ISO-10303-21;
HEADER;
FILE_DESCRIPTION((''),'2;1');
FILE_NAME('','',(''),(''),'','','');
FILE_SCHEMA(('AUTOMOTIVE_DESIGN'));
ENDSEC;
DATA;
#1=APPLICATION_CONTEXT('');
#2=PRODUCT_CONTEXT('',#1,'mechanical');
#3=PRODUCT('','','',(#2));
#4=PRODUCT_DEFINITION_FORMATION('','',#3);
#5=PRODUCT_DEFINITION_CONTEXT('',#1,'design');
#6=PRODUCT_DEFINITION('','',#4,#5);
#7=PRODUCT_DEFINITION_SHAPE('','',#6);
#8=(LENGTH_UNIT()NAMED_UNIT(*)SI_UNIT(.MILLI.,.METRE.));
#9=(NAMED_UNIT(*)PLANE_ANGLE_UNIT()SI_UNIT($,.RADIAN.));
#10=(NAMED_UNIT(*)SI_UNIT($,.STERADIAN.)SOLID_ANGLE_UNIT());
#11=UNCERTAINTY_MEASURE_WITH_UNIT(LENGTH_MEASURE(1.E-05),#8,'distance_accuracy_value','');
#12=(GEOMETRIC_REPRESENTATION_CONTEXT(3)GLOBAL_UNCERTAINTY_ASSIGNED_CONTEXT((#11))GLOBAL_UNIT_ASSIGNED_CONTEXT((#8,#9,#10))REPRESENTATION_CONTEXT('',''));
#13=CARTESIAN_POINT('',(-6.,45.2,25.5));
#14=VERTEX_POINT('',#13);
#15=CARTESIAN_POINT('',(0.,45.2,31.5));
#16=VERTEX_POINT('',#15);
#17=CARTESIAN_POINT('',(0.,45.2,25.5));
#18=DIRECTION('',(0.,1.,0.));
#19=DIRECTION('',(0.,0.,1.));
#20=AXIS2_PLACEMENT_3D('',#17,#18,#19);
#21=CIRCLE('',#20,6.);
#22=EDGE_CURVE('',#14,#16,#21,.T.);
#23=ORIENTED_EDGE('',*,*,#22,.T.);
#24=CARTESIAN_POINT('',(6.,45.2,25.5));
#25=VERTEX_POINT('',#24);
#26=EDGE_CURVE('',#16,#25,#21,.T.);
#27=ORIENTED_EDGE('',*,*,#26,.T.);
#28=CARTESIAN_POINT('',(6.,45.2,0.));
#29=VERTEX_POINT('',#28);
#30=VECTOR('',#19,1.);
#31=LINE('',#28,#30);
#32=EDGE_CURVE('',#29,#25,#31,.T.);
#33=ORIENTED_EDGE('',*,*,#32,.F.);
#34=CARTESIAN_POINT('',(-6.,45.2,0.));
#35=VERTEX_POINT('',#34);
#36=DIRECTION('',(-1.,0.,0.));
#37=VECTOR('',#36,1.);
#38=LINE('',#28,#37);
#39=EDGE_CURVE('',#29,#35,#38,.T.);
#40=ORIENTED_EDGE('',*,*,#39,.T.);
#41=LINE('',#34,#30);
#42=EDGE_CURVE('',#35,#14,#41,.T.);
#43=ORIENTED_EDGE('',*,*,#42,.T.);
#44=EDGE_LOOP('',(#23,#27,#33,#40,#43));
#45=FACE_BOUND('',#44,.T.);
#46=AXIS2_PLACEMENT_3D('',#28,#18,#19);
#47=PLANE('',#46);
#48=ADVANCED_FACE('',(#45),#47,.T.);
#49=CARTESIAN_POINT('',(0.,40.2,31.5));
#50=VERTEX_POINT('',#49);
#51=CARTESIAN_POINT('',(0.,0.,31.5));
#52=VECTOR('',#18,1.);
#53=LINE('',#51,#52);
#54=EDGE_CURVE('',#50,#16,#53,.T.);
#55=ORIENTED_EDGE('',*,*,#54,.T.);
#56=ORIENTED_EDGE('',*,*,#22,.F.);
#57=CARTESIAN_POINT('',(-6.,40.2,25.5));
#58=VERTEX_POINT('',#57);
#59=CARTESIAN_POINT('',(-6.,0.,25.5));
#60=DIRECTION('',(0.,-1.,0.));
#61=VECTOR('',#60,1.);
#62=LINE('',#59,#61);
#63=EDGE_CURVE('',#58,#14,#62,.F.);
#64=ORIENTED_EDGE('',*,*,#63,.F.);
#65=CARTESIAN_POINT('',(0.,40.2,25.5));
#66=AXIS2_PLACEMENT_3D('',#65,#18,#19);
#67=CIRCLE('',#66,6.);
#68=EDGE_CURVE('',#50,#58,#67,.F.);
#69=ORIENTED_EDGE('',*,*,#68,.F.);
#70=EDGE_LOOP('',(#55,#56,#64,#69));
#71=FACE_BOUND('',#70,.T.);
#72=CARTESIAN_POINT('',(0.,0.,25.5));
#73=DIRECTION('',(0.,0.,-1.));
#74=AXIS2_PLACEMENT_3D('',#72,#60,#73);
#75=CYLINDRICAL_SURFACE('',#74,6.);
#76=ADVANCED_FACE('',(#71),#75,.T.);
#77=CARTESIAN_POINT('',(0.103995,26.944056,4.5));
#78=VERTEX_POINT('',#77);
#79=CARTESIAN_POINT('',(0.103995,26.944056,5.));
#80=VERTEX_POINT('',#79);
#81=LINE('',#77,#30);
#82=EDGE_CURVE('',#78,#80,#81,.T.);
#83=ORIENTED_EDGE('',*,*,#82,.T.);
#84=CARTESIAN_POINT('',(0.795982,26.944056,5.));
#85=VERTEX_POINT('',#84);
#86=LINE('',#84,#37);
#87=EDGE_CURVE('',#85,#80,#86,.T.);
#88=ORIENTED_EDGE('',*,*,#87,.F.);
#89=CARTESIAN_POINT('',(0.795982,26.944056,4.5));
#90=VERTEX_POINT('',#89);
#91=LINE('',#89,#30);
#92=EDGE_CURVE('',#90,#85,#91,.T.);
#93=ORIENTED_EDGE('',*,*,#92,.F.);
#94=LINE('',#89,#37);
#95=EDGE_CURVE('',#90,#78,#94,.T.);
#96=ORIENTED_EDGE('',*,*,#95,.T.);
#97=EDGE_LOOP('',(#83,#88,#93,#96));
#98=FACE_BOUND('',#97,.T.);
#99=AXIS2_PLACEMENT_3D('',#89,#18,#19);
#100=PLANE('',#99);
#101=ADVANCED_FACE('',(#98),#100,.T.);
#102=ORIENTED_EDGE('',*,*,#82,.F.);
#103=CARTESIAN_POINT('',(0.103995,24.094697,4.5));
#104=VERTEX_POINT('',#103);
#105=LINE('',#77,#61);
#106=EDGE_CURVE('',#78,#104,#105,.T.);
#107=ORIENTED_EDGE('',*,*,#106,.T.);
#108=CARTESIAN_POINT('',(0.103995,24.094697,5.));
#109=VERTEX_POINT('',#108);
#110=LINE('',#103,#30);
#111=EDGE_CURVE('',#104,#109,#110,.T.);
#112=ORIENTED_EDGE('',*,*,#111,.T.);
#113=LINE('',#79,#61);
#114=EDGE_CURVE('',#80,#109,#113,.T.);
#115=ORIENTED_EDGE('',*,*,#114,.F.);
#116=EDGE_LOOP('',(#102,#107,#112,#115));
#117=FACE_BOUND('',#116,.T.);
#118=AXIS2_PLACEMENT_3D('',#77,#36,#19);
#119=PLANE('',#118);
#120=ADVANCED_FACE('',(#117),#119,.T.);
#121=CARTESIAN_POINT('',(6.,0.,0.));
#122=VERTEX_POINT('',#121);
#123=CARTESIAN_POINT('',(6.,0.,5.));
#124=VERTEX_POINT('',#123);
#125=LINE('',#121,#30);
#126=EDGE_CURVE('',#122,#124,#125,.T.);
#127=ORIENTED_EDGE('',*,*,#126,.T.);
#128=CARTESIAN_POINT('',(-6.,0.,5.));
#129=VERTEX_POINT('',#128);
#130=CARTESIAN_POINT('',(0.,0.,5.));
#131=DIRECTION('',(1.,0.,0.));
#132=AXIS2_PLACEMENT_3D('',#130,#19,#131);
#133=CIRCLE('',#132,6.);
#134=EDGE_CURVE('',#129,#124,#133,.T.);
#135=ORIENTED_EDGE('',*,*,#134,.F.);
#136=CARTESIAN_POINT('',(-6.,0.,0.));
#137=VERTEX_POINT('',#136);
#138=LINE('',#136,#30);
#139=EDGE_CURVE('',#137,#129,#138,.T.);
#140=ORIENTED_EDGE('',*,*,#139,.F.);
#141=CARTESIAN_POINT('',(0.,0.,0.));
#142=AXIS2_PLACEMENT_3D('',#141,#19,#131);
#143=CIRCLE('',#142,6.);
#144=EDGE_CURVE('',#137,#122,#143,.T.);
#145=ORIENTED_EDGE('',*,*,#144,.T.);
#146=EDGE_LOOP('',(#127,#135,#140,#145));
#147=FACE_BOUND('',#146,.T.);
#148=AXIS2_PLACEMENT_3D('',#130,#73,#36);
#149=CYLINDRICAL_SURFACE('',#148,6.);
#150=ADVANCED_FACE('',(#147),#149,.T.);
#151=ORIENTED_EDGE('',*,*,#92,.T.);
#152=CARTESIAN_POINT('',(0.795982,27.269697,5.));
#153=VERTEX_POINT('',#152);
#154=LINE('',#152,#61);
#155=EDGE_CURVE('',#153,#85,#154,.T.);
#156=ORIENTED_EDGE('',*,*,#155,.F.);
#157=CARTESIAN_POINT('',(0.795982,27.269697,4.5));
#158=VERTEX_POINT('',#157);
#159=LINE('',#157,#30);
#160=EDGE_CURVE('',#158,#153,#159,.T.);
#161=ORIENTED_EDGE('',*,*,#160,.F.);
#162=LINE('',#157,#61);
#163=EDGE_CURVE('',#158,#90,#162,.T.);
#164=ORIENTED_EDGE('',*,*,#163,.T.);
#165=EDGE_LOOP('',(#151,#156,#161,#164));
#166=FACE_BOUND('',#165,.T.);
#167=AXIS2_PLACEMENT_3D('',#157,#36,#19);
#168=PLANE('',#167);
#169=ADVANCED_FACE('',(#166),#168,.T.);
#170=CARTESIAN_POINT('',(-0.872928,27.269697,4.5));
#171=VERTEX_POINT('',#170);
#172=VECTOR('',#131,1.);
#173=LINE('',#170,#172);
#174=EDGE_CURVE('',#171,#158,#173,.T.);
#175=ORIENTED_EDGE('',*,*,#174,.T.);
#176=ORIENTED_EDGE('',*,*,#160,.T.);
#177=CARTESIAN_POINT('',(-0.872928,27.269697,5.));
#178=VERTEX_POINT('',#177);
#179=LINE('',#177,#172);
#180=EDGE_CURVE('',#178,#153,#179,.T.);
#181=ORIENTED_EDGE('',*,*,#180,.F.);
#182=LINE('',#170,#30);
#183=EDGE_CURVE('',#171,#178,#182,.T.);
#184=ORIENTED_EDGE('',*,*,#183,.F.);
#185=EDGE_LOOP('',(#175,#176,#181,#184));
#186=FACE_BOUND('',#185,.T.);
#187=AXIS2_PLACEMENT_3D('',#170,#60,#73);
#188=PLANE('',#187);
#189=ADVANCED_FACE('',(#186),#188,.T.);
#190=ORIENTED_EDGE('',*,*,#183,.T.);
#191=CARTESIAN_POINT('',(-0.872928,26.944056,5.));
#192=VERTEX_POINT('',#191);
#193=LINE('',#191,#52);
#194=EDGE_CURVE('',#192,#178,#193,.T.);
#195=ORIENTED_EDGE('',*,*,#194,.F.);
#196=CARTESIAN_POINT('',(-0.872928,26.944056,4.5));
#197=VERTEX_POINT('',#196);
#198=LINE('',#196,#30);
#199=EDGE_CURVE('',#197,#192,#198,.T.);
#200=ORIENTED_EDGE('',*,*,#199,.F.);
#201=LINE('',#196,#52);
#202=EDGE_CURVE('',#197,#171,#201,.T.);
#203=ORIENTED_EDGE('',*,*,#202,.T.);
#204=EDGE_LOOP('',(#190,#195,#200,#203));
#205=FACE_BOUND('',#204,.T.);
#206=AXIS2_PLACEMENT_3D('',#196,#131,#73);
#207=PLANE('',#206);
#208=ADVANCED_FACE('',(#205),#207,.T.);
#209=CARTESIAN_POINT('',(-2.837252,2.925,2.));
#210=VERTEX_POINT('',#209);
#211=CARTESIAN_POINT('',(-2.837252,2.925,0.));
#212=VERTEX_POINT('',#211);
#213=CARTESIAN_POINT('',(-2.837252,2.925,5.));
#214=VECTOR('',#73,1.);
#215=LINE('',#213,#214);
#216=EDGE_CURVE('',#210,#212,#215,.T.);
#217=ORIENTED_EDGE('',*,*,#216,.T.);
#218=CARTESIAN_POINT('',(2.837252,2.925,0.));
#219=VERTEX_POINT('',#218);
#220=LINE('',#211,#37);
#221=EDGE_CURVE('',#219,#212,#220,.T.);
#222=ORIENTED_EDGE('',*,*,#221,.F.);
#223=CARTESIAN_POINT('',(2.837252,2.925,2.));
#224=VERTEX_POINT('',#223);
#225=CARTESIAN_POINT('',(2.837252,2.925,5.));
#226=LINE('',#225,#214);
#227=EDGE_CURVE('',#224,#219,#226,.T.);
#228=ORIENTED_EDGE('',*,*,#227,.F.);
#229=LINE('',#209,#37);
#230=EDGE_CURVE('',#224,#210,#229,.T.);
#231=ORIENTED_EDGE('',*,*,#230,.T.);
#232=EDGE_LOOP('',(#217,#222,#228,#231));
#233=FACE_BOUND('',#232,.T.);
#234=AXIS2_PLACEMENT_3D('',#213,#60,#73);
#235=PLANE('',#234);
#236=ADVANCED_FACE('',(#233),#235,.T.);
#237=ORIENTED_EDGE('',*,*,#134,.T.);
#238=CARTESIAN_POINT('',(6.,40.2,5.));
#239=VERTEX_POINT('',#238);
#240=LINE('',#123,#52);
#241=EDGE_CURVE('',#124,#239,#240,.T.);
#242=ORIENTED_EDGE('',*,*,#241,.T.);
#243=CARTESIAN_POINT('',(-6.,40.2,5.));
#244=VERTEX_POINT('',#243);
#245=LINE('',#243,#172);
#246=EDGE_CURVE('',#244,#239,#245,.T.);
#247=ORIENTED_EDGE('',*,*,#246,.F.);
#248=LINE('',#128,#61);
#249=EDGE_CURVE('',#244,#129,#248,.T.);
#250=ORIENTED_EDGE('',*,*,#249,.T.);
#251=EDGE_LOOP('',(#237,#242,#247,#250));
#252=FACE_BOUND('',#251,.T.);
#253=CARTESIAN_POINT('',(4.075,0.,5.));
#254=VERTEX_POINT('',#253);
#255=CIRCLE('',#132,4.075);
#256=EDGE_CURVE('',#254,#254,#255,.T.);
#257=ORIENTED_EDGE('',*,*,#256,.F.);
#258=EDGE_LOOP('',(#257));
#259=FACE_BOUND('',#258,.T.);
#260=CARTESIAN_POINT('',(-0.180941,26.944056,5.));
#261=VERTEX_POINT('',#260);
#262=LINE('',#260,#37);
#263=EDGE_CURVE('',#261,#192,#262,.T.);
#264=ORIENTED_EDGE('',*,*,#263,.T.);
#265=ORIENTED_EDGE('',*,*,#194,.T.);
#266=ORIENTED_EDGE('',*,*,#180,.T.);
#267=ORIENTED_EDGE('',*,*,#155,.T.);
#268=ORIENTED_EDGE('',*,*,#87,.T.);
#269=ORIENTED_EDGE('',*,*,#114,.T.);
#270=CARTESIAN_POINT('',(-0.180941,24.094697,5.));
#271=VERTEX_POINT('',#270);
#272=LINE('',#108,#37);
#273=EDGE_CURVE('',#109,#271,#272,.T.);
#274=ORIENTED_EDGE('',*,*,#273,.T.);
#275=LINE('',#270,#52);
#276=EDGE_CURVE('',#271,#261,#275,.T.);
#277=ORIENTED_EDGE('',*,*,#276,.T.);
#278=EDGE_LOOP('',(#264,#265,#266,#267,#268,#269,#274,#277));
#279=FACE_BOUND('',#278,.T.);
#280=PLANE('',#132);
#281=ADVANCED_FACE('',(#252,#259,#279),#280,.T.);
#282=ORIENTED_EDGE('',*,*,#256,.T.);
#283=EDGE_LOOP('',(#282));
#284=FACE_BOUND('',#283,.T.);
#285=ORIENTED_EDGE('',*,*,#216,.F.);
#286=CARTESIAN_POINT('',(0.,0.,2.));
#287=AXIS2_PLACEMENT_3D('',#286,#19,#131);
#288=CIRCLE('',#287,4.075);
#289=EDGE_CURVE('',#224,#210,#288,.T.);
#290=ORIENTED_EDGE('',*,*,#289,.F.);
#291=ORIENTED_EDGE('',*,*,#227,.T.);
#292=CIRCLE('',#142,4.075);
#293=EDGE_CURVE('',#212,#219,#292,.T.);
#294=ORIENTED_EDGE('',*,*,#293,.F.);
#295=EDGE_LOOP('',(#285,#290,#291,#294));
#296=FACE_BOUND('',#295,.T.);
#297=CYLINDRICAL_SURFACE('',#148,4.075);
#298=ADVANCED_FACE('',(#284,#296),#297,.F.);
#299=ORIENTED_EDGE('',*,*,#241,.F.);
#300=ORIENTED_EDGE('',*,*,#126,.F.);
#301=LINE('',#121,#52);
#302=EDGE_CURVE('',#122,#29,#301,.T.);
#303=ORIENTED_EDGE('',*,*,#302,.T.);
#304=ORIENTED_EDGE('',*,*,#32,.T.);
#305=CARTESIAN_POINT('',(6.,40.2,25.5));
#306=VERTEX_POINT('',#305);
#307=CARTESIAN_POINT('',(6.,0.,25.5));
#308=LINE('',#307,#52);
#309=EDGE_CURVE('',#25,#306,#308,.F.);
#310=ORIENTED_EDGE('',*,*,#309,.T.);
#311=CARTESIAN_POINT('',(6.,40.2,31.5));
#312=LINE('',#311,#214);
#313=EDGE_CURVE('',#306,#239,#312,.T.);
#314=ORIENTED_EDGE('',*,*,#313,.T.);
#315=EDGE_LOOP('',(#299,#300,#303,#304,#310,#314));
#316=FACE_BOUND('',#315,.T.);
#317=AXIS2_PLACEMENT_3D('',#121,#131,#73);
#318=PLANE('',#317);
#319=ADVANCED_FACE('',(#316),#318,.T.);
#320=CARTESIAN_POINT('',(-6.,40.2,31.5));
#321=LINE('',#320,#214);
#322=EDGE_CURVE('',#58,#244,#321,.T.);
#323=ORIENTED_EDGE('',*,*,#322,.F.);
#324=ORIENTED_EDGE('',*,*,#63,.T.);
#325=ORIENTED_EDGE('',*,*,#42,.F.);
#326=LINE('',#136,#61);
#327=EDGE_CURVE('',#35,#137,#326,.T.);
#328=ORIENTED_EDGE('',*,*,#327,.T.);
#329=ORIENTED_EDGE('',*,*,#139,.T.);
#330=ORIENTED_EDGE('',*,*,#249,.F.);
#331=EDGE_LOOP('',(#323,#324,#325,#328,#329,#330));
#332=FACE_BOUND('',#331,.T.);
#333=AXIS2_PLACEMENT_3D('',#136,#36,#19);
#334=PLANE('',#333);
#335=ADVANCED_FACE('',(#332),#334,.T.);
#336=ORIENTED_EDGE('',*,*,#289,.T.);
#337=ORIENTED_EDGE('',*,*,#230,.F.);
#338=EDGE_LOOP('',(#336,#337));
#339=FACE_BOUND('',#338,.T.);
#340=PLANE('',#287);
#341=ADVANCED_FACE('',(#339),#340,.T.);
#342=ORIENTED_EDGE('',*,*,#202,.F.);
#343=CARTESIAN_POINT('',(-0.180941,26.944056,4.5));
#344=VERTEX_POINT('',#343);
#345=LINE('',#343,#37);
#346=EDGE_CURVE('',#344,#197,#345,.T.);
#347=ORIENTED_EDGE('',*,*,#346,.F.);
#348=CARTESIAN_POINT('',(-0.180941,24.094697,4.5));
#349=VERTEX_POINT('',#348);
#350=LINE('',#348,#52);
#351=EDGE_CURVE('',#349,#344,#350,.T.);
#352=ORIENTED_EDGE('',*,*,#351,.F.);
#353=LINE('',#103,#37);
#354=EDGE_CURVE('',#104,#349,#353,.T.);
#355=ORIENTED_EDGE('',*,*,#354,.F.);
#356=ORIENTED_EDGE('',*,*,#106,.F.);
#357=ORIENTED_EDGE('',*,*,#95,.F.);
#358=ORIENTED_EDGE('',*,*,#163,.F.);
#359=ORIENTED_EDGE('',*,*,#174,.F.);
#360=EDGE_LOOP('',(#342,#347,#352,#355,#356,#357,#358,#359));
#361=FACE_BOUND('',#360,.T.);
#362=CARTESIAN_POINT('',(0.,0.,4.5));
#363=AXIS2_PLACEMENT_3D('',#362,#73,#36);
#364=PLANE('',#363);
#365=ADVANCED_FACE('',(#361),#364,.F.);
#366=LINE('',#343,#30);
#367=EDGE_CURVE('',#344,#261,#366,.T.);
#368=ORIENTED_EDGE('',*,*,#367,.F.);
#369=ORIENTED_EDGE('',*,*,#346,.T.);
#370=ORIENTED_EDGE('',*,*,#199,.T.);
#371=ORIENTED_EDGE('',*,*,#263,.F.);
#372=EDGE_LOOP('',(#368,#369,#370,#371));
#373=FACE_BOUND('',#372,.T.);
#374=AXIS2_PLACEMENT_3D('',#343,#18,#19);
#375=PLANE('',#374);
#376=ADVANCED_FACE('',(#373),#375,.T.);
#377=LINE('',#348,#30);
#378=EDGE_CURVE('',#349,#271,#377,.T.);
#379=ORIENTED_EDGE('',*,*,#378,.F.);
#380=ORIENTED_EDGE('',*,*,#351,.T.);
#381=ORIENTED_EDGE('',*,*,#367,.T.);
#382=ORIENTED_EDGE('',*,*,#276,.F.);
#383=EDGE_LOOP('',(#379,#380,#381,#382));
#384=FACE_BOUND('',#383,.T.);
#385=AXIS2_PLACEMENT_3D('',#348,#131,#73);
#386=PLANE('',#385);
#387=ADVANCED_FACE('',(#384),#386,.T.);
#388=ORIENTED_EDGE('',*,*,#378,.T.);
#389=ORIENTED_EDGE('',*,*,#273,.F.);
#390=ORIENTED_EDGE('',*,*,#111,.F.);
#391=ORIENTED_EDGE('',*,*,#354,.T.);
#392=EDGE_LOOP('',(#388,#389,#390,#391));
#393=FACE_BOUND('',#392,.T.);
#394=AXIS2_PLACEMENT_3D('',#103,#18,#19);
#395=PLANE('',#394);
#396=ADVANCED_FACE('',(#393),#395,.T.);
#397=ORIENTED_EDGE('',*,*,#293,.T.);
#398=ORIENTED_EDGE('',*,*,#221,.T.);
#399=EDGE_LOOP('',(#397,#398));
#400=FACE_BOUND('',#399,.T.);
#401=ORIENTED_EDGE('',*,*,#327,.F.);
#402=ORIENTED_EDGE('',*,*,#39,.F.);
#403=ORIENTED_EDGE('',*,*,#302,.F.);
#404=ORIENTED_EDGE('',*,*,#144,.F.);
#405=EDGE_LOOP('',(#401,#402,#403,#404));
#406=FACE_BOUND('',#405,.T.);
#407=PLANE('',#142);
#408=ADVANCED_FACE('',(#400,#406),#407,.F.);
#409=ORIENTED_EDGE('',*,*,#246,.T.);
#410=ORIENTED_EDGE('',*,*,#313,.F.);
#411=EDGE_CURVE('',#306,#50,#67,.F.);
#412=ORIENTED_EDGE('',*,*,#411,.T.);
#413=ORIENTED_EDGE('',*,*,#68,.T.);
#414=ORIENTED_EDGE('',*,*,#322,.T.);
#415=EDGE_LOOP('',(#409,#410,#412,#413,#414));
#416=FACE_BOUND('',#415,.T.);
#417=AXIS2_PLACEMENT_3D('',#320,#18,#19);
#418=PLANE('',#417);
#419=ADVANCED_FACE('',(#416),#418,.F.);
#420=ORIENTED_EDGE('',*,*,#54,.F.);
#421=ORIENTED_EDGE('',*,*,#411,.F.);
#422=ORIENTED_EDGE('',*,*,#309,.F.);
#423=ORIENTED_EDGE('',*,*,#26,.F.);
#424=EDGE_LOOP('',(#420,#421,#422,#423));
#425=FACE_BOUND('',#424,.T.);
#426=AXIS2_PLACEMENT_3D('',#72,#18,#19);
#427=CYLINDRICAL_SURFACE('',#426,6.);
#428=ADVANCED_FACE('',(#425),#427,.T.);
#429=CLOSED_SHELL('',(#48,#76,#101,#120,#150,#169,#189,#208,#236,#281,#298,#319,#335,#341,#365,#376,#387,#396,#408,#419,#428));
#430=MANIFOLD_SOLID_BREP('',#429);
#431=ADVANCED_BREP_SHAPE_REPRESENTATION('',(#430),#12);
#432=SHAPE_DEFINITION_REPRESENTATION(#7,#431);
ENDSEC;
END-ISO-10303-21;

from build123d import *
from build123d.topology import SkipClean

# Parameters (mm, degrees)
SKETCH1_R           = 6
BOSS_EXTRUDE1_DEPTH = 5
BOSS_EXTRUDE2_START = -5
BOSS_EXTRUDE2_DEPTH = 5
CUT_EXTRUDE1_START  = -3
SKETCH3_R           = 4.075
CUT_EXTRUDE1_DEPTH  = 3
SKETCH4_W           = 12
SKETCH4_H           = 5
BOSS_EXTRUDE3_DEPTH = 26.5
FILLET1_R           = 6
CUT_EXTRUDE2_DEPTH  = 0.5


with BuildPart() as part:
    # Sketch1 → Boss-Extrude1 (new body)
    with BuildSketch(Plane.XY):
        Circle(SKETCH1_R)
        with BuildLine():
            Line((-2.837252192, 2.925), (2.837252192, 2.925))
            ThreePointArc((2.837252192, 2.925), (0, -4.075), (-2.837252192, 2.925))
        make_face(mode=Mode.SUBTRACT)
    extrude(amount=BOSS_EXTRUDE1_DEPTH)

    # Sketch2 → Boss-Extrude2 (add)
    with BuildSketch(Plane.XY.offset(5).offset(BOSS_EXTRUDE2_START)):
        with BuildLine():
            Line((-6, 0), (-6, 45.2))
            Line((-6, 45.2), (6, 45.2))
            Line((6, 45.2), (6, 0))
            ThreePointArc((6, 0), (0, 6), (-6, 0))
        make_face()
    extrude(amount=BOSS_EXTRUDE2_DEPTH)

    # Sketch3 → Cut-Extrude1 (cut)
    with SkipClean():  # the faces are left unmerged after this step: merging them gives an invalid solid
        with BuildSketch(Plane.XY.offset(5).offset(CUT_EXTRUDE1_START)):
            with Locations(Location((0, 0, 0), (0, 0, 134.127564998))):
                Circle(SKETCH3_R)
        extrude(amount=CUT_EXTRUDE1_DEPTH, mode=Mode.SUBTRACT)

    # Sketch4 → Boss-Extrude3 (add)
    with SkipClean():  # the faces are left unmerged after this step: merging them gives an invalid solid
        with BuildSketch(Plane.XY.offset(5)):
            with Locations((0, 42.7)):
                Rectangle(SKETCH4_W, SKETCH4_H)
        extrude(amount=BOSS_EXTRUDE3_DEPTH)

    # Fillet1
    fillet1_edges = [part.edges().sort_by_distance(p)[0] for p in [
        (-6, 42.7, 31.5),
        (6, 42.7, 31.5),
    ]]
    fillet(fillet1_edges, radius=FILLET1_R - 0.0001)  # a hair under: the kernel refuses the full size

    # Sketch6 → Cut-Extrude2 (cut)
    with BuildSketch(Plane.XY.offset(5)):
        Polygon((-0.872927967, 26.944055952), (-0.872927967, 27.269696978), (0.79598229, 27.269696978), (0.79598229, 26.944055952), (0.10399511, 26.944055952), (0.10399511, 24.094696978), (-0.180940787, 24.094696978), (-0.180940787, 26.944055952), align=None)
    extrude(amount=-CUT_EXTRUDE2_DEPTH, mode=Mode.SUBTRACT)


solid = part.part
